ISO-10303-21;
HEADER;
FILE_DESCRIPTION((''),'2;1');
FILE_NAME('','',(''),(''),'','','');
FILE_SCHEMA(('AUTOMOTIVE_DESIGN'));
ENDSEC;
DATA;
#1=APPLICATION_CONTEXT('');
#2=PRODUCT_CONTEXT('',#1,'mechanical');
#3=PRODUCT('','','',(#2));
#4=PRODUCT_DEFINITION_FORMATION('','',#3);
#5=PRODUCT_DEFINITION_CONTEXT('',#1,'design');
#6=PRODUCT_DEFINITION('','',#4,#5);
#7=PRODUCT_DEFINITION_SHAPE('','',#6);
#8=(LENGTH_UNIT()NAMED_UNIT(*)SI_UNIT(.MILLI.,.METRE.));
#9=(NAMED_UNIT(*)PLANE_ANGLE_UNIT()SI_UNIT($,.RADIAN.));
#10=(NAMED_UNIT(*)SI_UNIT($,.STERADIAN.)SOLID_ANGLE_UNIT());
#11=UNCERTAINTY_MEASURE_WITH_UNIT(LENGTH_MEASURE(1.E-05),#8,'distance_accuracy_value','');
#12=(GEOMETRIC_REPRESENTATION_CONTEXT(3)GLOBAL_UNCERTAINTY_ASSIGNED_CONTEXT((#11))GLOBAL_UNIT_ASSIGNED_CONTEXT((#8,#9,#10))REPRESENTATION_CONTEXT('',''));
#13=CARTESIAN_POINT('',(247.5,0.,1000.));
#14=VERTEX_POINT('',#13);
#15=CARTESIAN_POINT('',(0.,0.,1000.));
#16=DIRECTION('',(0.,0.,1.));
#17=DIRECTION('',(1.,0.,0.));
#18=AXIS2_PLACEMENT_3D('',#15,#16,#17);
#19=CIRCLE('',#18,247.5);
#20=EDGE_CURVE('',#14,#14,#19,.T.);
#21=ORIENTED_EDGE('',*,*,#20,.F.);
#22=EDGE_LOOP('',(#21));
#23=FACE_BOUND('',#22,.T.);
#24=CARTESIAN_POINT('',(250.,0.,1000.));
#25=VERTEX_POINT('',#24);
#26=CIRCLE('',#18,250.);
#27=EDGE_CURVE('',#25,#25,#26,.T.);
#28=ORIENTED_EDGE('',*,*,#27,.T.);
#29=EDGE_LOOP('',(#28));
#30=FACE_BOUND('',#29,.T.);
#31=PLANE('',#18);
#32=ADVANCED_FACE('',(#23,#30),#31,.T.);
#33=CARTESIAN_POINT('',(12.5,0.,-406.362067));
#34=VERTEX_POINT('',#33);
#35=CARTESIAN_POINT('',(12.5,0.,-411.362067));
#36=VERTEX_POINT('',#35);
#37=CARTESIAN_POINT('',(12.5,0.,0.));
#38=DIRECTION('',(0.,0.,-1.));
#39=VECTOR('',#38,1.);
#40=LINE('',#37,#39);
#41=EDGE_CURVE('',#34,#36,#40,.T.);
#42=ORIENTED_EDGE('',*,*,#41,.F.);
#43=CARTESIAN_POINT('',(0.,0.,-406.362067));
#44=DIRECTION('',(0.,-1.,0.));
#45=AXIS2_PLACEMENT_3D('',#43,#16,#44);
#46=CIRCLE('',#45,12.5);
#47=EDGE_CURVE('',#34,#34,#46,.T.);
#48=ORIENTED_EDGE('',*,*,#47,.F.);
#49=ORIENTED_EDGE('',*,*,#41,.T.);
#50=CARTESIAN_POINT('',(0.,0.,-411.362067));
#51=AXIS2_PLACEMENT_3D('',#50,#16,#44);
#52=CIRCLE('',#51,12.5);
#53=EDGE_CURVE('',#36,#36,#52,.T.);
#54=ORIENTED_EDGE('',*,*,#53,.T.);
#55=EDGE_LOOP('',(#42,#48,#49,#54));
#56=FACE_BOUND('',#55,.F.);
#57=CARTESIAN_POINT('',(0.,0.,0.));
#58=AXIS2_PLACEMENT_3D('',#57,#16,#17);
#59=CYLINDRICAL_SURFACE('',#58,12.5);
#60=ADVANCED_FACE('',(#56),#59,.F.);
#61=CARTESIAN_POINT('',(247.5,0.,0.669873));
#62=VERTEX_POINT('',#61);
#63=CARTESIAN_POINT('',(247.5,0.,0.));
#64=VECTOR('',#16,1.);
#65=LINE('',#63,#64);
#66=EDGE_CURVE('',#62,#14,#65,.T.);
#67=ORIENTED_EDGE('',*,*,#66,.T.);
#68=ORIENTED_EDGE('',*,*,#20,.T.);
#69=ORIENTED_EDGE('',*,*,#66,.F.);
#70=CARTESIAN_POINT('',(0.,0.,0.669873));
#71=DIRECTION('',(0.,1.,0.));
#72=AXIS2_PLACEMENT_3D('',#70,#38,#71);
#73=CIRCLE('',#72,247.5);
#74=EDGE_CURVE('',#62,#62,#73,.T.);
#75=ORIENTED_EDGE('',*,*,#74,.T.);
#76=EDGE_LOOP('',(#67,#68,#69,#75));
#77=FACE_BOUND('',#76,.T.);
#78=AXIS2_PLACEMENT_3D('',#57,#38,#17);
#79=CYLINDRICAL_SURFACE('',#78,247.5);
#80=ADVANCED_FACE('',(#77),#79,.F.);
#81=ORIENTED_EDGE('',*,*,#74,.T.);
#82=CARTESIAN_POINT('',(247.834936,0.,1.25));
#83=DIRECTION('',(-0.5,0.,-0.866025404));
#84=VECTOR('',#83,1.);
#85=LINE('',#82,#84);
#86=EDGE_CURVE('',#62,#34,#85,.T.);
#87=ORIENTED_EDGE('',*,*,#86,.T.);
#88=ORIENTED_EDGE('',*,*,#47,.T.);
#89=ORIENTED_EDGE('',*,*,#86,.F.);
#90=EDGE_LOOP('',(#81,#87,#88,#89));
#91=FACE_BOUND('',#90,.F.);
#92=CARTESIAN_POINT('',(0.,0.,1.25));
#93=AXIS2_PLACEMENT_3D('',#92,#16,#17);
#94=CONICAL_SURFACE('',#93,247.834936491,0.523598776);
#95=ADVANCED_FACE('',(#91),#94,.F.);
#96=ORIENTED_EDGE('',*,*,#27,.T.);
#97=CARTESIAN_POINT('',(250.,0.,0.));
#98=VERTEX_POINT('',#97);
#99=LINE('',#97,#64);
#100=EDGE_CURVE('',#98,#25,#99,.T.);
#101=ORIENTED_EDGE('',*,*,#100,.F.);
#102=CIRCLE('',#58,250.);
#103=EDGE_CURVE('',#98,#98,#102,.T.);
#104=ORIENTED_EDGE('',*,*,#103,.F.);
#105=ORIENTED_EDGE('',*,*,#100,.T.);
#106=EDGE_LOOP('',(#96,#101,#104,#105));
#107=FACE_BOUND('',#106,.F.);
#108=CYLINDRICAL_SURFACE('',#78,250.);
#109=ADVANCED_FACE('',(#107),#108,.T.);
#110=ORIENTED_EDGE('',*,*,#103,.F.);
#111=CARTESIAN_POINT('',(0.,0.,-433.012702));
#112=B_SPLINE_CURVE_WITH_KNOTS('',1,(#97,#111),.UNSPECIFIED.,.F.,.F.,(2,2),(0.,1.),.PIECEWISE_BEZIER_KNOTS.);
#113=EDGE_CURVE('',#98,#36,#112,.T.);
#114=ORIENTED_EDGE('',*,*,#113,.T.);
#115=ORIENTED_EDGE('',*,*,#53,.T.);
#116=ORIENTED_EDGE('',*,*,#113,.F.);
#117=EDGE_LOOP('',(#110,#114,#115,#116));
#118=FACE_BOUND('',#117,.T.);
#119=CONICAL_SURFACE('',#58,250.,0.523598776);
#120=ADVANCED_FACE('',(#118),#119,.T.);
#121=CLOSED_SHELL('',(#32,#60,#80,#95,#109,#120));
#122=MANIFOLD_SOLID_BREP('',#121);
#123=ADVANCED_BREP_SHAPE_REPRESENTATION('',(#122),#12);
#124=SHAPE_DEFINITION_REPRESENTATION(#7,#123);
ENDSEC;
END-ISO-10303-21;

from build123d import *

# Parameters (mm, degrees)
F0_R     = 250
F1_DEPTH = 1000
F2_R     = 250
F4_T     = -2.5
F5_R     = 12.5
F6_DEPTH = 433.0137019922


# Not quite as in the source:
# - an extrude whose draft closes it to a point is written as a loft to that point


with BuildPart() as f1:
    # F0 (on Top) → F1 (new body)
    with BuildSketch(Plane.XY):
        Circle(F0_R)
    extrude(amount=F1_DEPTH)

    # F2 (on face) → F3 section 0
    with BuildSketch(Plane(origin=(0, 0, 0), x_dir=(1, 0, 0), z_dir=(0, 0, -1)), mode=Mode.PRIVATE) as f3_s0:
        Circle(F2_R)
    loft([f3_s0.sketch, Vertex(0, 0, -433.0127018922)], ruled=True)

    # F4
    f4_openings = [f1.faces().sort_by_distance(p)[0] for p in [
        (0, 0, 1000),
    ]]
    offset(amount=F4_T, openings=f4_openings)

    # F5 (on Top) → F6 (cut, through all)
    with BuildSketch(Plane.XY):
        Circle(F5_R)
    extrude(amount=-F6_DEPTH, mode=Mode.SUBTRACT)


solid = f1.part
